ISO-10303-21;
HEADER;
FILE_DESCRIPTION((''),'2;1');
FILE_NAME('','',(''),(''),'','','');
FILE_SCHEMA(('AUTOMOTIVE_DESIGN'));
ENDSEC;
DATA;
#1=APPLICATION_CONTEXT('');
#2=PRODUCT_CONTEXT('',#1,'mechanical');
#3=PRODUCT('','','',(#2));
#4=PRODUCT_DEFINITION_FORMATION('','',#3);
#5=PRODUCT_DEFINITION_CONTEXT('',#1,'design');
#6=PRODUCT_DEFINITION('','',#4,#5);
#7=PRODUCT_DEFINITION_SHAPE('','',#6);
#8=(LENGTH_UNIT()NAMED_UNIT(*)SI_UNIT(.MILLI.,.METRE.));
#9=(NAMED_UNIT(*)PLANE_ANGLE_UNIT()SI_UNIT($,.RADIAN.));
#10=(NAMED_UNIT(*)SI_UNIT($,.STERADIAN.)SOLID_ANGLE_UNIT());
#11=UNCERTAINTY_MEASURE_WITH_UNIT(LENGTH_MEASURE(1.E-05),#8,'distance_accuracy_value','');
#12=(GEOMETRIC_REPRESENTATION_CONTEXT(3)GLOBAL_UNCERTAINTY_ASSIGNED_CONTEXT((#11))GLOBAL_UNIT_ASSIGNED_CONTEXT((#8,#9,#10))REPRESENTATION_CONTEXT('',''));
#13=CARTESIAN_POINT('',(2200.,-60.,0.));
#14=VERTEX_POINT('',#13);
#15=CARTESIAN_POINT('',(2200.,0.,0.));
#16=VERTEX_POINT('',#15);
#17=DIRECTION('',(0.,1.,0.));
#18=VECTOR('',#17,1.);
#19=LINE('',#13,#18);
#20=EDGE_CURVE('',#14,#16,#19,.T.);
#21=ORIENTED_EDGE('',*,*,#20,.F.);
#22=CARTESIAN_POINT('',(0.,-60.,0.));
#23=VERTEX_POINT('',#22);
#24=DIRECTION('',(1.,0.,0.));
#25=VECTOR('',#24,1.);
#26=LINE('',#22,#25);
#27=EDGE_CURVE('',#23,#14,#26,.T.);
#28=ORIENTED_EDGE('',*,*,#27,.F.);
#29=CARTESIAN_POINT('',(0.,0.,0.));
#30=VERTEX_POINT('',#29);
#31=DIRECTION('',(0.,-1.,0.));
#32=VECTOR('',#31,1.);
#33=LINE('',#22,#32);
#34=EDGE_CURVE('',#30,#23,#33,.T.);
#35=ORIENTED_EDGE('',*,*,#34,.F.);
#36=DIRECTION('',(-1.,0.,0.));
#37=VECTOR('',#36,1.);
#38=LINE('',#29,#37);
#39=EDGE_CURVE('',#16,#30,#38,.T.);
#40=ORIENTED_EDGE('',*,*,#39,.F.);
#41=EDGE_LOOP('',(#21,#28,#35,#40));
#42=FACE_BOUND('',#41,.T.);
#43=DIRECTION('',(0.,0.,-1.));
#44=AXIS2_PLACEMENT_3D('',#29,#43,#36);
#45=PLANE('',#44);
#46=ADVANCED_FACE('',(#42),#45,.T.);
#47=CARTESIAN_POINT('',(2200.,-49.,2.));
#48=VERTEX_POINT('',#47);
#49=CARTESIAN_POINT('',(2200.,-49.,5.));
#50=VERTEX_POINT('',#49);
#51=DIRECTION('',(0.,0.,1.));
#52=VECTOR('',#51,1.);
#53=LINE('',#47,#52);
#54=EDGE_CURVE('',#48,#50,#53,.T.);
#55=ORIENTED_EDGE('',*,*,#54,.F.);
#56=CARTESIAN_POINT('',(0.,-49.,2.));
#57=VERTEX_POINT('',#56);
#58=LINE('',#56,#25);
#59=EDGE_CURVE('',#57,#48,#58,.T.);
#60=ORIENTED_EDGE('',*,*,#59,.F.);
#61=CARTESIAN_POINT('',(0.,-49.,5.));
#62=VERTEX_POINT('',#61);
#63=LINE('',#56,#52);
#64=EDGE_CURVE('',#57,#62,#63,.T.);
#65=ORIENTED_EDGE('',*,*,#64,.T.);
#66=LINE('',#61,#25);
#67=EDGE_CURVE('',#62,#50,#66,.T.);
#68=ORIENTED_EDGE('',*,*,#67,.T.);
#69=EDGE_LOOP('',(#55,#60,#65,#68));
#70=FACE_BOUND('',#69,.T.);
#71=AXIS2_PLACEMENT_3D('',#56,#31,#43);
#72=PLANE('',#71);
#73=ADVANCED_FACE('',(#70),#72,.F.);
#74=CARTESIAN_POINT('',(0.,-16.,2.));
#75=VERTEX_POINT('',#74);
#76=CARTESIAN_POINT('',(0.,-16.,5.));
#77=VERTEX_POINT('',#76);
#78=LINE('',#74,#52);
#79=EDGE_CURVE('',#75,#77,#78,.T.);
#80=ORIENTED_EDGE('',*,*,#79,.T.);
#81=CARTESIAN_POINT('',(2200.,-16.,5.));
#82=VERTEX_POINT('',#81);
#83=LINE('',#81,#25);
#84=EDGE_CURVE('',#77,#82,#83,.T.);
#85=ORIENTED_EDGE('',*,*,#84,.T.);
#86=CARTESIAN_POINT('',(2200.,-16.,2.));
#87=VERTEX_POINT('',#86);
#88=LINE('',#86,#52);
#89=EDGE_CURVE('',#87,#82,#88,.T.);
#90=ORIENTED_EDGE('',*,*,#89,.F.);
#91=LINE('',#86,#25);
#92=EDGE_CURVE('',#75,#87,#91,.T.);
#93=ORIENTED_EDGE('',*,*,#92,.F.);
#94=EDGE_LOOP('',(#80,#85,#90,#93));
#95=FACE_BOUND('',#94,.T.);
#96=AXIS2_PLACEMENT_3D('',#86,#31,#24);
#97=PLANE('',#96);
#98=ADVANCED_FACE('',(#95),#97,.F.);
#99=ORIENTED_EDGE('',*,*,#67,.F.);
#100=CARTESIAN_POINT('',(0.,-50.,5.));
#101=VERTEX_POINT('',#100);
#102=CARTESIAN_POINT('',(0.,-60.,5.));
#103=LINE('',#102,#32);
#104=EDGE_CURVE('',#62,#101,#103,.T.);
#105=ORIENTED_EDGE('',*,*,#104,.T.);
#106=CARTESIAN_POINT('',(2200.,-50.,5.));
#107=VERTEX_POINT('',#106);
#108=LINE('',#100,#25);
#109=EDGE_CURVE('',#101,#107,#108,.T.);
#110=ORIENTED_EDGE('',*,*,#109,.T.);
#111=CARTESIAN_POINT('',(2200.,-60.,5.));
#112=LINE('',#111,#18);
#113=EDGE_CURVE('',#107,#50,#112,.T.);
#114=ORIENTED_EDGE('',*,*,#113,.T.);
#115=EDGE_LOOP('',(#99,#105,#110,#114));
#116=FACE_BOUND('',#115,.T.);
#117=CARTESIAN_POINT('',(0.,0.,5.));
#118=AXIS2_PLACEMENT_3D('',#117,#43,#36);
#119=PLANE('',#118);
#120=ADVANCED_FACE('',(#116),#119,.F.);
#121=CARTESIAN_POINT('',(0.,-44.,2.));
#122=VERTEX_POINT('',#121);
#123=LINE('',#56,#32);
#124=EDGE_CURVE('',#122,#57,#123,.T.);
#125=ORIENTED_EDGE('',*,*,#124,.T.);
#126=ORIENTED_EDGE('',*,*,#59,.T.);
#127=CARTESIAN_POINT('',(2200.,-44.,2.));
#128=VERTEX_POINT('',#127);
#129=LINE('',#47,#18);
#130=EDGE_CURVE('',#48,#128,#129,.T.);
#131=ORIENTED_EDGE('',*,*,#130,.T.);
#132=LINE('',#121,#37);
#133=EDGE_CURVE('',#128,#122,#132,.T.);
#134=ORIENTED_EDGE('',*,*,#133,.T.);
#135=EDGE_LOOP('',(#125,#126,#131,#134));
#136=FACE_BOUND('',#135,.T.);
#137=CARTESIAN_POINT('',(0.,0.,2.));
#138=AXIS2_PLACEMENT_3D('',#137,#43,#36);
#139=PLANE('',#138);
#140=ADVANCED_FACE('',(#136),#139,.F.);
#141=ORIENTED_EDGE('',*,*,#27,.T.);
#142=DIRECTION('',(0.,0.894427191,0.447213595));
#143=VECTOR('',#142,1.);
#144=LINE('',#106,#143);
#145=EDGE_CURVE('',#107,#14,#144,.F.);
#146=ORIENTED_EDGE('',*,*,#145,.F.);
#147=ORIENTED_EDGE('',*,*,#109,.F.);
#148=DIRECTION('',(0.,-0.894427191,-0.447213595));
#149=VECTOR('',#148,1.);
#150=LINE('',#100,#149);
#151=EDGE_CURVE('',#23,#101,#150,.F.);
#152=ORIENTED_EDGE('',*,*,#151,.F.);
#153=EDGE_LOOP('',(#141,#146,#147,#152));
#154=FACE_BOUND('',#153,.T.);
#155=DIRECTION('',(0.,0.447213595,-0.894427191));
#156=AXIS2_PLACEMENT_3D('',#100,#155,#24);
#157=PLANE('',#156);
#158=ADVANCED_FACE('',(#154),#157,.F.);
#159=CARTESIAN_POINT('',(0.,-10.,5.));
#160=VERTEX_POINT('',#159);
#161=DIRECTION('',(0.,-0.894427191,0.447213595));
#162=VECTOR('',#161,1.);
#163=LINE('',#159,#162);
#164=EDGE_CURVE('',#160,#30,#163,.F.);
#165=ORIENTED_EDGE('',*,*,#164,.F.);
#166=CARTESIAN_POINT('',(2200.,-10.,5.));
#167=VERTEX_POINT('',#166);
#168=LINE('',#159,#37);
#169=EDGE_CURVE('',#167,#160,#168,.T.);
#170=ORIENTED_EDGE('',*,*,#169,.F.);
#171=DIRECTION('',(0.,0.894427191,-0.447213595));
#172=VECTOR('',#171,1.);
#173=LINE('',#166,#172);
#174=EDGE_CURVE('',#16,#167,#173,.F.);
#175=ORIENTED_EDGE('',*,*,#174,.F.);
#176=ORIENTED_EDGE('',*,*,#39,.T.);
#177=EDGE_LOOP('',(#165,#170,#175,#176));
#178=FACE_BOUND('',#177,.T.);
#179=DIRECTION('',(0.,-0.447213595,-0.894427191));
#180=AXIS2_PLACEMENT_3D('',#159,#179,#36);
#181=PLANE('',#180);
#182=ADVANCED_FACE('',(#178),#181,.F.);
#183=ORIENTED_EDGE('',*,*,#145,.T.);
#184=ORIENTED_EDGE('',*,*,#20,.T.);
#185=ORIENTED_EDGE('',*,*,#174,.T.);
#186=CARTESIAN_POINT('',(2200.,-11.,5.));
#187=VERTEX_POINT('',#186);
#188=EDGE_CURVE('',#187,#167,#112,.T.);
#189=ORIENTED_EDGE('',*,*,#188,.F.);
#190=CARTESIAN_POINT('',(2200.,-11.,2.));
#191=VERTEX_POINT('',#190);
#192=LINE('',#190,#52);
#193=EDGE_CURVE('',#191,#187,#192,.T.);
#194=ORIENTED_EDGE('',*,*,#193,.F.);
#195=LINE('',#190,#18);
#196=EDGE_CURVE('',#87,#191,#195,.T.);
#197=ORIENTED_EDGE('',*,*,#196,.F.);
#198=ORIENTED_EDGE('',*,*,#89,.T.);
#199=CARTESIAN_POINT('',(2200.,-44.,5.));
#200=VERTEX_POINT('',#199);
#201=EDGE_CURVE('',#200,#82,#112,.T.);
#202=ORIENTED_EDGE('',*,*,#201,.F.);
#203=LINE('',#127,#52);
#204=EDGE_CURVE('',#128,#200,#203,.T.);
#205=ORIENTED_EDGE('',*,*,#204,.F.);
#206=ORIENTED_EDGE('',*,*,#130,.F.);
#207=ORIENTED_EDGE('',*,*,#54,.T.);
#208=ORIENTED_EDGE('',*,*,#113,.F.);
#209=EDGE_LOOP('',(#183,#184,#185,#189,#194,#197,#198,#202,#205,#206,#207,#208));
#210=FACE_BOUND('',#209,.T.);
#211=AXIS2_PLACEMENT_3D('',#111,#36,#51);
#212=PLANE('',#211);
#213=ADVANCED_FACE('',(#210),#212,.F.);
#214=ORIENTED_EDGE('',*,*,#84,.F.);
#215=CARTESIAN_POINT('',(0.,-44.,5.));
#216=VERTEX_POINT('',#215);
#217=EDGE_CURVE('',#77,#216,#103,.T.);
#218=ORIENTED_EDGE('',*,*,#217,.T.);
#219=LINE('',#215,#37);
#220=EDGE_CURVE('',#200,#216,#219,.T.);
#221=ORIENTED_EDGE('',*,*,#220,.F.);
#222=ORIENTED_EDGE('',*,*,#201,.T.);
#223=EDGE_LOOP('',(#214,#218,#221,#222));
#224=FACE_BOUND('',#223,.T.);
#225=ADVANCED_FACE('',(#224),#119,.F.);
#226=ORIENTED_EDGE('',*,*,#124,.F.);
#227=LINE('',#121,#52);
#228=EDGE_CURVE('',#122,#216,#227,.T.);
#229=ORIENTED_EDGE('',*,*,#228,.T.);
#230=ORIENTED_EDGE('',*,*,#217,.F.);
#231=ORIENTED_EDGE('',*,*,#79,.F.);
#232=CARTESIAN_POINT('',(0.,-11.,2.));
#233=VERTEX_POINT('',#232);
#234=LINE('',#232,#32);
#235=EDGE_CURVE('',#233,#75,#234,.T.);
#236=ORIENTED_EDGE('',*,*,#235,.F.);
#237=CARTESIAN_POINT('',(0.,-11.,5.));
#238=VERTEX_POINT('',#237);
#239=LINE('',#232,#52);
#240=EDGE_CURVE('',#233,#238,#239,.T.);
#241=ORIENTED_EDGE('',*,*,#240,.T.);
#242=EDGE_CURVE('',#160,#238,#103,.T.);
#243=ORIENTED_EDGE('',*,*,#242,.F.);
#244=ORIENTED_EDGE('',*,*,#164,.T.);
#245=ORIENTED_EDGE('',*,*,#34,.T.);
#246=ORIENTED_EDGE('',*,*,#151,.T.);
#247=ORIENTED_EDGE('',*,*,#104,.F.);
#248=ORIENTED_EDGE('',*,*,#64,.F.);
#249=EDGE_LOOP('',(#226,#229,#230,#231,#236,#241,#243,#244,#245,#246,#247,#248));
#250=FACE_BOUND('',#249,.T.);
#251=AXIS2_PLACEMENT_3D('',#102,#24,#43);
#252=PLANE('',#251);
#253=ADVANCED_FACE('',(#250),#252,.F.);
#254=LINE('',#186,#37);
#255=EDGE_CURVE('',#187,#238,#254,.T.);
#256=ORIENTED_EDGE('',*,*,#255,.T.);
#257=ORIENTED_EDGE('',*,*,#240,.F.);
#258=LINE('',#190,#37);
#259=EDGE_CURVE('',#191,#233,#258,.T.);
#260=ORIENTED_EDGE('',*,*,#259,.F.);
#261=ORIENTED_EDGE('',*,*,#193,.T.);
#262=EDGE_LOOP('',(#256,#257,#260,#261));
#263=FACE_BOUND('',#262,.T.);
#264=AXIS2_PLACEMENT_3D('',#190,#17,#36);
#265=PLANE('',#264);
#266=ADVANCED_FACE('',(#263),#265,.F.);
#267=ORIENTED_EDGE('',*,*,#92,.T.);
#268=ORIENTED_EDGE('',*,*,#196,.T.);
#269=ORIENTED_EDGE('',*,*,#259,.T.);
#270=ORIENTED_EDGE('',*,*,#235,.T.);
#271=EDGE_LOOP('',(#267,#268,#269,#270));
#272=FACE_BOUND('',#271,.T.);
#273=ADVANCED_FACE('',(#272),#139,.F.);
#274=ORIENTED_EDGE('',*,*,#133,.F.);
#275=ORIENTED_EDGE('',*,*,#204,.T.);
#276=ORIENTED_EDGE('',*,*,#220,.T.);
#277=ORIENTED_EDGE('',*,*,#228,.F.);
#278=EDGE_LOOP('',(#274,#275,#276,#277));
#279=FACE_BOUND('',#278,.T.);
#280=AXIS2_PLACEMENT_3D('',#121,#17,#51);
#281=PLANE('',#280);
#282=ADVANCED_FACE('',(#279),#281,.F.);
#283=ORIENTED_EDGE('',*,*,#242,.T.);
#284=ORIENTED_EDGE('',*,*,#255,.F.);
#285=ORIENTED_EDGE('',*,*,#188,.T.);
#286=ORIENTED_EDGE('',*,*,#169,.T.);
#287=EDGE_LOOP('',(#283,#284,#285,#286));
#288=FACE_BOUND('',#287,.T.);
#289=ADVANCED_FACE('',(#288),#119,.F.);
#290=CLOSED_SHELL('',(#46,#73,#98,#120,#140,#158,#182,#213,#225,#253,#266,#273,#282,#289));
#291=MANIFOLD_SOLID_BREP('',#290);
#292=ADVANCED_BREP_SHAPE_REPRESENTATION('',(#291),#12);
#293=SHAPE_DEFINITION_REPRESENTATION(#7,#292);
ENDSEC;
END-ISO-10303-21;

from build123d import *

# Parameters (mm, degrees)
SKETCH_1_W          = 2200
SKETCH_1_H          = 60
EXTRUDE_1_DEPTH     = 5
CHAMFER_1_SIZE      = 5
CHAMFER_1_SIZE_2    = 10
SKETCH_2_W          = 2200
SKETCH_2_H          = 5
CUT_EXTRUDE_2_DEPTH = 3


with BuildPart() as part:
    # Эскиз1 → Бобышка-Вытянуть1 (new body)
    with BuildSketch(Plane.XY):
        with Locations((1100, -30)):
            Rectangle(SKETCH_1_W, SKETCH_1_H)
    extrude(amount=EXTRUDE_1_DEPTH)

    # Фаска1
    # the kernel refuses this chamfer: 10, 5 mm, written as the material it takes off along each edge
    with BuildSketch(Plane(origin=(2225.898288738, 0, 5), x_dir=(0, 0.06891834360170877, -0.9976223042390326), z_dir=(-1, 0, 0)), Plane(origin=(-25.898288738, -60, 5), x_dir=(0, -0.06891834360170909, -0.9976223042390324), z_dir=(1, 0, 0))) as chamfer_1_piece_1:
        Polygon((CHAMFER_1_SIZE * 0.997622304239, CHAMFER_1_SIZE * 0.0689183436017), (-CHAMFER_1_SIZE_2 * 0.0689183436017, CHAMFER_1_SIZE_2 * 0.997622304239), (0, 0), align=None)
    extrude(amount=2251.796577476, mode=Mode.SUBTRACT)

    # Эскиз2 → Вырез-Вытянуть2 (cut)
    with BuildSketch(Plane.XY.offset(5)):
        with Locations((1100, -46.5)):
            Rectangle(SKETCH_2_W, SKETCH_2_H)
        with Locations((1100, -13.5)):
            Rectangle(SKETCH_2_W, SKETCH_2_H)
    extrude(amount=-CUT_EXTRUDE_2_DEPTH, mode=Mode.SUBTRACT)


solid = part.part
